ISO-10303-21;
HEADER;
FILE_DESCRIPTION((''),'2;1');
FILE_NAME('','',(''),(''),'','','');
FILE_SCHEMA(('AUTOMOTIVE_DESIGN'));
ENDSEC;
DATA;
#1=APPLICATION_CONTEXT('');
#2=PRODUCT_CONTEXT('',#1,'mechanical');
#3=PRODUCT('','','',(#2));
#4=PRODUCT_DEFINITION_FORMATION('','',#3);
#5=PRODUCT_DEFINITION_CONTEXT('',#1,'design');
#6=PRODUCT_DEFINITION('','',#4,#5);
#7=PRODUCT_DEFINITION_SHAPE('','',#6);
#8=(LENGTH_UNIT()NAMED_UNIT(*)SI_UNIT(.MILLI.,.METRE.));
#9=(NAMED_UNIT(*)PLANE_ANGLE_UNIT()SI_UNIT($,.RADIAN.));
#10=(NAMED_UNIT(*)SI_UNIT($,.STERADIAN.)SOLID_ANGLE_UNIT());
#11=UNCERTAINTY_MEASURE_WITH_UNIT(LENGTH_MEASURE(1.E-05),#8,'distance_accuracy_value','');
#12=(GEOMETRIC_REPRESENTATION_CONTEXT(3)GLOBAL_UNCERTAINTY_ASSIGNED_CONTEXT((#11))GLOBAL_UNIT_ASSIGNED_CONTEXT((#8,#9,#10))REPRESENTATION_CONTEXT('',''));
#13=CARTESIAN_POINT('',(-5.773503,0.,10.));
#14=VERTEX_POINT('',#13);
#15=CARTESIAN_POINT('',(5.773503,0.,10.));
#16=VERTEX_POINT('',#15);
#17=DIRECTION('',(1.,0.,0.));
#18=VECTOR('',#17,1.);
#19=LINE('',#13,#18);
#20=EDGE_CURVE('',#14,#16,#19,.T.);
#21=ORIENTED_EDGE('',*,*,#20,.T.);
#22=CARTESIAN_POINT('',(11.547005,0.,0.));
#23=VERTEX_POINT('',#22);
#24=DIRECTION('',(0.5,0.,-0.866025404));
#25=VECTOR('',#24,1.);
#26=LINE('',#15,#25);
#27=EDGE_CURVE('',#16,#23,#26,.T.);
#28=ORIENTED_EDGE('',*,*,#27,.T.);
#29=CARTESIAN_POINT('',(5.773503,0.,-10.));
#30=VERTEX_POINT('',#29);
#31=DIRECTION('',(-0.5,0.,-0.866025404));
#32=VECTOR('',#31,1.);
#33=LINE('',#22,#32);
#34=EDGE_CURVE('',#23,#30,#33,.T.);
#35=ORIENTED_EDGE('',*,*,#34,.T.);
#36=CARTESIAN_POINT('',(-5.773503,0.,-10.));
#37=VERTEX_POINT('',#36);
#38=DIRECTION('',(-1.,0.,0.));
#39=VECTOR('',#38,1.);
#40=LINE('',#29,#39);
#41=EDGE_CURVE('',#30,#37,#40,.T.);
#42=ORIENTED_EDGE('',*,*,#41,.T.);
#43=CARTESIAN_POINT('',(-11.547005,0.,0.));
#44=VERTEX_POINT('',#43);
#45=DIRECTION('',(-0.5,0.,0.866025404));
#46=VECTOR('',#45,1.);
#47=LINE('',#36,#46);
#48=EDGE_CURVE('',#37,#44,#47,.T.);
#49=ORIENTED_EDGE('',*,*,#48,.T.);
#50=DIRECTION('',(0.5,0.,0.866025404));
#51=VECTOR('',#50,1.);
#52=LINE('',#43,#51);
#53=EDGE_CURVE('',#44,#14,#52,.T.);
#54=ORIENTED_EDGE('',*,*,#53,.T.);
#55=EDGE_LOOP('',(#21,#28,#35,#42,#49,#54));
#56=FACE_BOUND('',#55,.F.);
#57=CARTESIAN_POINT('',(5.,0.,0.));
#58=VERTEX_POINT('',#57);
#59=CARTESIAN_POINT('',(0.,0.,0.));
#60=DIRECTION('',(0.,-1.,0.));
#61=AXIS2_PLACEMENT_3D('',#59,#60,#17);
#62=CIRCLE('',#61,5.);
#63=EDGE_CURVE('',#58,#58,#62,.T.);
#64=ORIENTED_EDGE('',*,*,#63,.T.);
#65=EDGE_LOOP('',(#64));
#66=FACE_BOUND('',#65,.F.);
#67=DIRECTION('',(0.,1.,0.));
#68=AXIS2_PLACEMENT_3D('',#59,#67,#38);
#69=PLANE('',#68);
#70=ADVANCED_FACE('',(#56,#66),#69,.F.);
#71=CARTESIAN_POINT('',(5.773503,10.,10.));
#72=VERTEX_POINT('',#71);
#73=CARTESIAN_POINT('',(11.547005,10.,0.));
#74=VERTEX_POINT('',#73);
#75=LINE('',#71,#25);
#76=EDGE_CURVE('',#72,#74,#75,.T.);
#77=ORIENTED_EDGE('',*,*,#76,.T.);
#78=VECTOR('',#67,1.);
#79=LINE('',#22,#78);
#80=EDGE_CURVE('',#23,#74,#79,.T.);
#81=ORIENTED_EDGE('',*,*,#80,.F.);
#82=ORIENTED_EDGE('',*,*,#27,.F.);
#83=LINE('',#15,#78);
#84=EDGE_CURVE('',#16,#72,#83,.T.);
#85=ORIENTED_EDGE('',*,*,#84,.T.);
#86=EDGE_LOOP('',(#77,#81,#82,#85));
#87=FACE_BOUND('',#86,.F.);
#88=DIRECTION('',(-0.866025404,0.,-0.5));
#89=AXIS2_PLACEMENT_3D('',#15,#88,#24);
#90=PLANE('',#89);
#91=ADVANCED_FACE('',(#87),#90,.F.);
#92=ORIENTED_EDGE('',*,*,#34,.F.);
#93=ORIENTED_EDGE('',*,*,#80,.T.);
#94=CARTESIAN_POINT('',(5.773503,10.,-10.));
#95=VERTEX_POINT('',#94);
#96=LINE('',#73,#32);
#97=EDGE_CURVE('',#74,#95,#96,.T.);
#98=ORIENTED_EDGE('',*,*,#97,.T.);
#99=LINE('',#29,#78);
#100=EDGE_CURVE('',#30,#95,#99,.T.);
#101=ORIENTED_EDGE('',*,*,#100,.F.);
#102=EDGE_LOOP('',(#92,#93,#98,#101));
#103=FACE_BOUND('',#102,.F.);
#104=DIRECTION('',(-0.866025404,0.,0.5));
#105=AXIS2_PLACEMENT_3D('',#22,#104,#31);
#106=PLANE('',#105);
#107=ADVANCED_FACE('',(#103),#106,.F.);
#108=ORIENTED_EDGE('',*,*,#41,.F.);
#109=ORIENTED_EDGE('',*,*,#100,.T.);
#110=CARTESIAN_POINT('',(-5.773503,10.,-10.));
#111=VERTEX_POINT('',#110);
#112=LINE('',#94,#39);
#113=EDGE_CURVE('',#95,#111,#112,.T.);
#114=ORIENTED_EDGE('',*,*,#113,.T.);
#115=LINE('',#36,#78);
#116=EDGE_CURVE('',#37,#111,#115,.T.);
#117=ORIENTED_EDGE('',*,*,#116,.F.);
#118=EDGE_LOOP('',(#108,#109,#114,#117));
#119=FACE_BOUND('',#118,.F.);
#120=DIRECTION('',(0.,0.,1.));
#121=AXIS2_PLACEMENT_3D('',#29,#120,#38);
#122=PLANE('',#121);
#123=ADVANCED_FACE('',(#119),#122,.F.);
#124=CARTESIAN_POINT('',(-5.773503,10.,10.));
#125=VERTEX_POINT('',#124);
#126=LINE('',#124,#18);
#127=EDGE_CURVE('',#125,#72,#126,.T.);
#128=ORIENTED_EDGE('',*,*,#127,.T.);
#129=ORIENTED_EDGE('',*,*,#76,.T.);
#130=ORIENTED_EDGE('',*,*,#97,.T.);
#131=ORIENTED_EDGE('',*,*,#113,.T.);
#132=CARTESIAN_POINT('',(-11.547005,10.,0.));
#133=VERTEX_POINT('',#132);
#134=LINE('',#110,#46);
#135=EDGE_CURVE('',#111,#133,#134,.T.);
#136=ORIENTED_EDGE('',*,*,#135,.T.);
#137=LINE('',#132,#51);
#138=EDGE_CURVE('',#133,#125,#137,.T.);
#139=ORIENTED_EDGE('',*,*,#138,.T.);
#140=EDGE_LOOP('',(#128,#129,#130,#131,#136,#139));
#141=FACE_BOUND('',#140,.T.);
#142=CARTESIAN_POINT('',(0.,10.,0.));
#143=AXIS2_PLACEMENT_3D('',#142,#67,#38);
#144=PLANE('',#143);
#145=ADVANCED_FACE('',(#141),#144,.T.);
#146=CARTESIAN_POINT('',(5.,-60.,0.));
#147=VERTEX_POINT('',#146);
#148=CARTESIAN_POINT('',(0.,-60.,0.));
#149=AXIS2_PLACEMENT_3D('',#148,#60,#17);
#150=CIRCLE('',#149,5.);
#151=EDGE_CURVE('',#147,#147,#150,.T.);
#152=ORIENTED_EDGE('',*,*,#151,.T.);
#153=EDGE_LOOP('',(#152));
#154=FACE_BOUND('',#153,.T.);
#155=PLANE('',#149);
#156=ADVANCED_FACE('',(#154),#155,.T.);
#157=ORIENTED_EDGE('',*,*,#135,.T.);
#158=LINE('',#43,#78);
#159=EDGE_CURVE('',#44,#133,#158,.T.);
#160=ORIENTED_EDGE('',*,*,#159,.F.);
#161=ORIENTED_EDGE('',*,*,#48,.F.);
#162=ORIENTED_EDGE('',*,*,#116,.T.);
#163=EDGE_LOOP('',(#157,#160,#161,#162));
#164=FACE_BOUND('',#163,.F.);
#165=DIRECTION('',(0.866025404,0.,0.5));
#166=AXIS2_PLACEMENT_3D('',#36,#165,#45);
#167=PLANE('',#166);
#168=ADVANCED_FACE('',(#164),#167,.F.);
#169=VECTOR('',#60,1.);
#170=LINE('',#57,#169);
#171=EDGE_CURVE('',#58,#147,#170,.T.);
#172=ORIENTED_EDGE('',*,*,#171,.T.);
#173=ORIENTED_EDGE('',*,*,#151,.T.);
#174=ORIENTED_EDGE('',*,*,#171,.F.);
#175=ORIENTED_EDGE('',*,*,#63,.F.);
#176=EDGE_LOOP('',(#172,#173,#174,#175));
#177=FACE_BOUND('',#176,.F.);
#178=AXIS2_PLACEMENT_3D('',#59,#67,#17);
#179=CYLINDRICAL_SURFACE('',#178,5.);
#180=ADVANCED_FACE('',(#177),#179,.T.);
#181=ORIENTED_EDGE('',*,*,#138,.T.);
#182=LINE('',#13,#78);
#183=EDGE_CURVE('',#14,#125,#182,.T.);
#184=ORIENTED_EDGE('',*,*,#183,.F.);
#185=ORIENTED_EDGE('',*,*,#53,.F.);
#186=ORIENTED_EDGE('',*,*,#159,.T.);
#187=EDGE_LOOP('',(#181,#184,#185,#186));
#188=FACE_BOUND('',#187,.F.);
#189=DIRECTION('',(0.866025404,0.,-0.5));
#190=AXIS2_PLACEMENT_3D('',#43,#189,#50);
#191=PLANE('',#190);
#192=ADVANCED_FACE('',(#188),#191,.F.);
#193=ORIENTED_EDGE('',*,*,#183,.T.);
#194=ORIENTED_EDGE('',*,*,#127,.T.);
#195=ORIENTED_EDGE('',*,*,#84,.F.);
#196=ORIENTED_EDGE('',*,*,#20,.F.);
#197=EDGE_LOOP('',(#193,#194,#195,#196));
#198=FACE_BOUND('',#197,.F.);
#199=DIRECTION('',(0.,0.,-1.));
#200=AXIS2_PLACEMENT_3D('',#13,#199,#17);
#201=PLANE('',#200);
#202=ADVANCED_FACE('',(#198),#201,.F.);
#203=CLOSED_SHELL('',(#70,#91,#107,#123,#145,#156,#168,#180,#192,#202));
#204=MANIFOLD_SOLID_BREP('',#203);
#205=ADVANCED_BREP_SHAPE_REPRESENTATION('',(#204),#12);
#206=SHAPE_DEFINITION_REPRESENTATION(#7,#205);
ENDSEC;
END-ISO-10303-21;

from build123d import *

# Parameters (mm, degrees)
F0_R     = 5
F1_DEPTH = 60
F2_R     = 5
F3_DEPTH = 10


with BuildPart() as f1:
    # F0 (on Front) → F1 (new body)
    with BuildSketch(Plane.XZ):
        Circle(F0_R)
    extrude(amount=F1_DEPTH)

    # F2 (on face) → F3 (join)
    with BuildSketch(Plane(origin=(0, 0, 0), x_dir=(-1, 0, 0), z_dir=(0, 1, 0))):
        Polygon((5.7735026919, -10), (11.5470053838, 0), (5.7735026919, 10), (-5.7735026919, 10), (-11.5470053838, 0), (-5.7735026919, -10), align=None)
        Circle(F2_R, mode=Mode.SUBTRACT)
        Circle(F2_R)
    extrude(amount=F3_DEPTH)


solid = f1.part
